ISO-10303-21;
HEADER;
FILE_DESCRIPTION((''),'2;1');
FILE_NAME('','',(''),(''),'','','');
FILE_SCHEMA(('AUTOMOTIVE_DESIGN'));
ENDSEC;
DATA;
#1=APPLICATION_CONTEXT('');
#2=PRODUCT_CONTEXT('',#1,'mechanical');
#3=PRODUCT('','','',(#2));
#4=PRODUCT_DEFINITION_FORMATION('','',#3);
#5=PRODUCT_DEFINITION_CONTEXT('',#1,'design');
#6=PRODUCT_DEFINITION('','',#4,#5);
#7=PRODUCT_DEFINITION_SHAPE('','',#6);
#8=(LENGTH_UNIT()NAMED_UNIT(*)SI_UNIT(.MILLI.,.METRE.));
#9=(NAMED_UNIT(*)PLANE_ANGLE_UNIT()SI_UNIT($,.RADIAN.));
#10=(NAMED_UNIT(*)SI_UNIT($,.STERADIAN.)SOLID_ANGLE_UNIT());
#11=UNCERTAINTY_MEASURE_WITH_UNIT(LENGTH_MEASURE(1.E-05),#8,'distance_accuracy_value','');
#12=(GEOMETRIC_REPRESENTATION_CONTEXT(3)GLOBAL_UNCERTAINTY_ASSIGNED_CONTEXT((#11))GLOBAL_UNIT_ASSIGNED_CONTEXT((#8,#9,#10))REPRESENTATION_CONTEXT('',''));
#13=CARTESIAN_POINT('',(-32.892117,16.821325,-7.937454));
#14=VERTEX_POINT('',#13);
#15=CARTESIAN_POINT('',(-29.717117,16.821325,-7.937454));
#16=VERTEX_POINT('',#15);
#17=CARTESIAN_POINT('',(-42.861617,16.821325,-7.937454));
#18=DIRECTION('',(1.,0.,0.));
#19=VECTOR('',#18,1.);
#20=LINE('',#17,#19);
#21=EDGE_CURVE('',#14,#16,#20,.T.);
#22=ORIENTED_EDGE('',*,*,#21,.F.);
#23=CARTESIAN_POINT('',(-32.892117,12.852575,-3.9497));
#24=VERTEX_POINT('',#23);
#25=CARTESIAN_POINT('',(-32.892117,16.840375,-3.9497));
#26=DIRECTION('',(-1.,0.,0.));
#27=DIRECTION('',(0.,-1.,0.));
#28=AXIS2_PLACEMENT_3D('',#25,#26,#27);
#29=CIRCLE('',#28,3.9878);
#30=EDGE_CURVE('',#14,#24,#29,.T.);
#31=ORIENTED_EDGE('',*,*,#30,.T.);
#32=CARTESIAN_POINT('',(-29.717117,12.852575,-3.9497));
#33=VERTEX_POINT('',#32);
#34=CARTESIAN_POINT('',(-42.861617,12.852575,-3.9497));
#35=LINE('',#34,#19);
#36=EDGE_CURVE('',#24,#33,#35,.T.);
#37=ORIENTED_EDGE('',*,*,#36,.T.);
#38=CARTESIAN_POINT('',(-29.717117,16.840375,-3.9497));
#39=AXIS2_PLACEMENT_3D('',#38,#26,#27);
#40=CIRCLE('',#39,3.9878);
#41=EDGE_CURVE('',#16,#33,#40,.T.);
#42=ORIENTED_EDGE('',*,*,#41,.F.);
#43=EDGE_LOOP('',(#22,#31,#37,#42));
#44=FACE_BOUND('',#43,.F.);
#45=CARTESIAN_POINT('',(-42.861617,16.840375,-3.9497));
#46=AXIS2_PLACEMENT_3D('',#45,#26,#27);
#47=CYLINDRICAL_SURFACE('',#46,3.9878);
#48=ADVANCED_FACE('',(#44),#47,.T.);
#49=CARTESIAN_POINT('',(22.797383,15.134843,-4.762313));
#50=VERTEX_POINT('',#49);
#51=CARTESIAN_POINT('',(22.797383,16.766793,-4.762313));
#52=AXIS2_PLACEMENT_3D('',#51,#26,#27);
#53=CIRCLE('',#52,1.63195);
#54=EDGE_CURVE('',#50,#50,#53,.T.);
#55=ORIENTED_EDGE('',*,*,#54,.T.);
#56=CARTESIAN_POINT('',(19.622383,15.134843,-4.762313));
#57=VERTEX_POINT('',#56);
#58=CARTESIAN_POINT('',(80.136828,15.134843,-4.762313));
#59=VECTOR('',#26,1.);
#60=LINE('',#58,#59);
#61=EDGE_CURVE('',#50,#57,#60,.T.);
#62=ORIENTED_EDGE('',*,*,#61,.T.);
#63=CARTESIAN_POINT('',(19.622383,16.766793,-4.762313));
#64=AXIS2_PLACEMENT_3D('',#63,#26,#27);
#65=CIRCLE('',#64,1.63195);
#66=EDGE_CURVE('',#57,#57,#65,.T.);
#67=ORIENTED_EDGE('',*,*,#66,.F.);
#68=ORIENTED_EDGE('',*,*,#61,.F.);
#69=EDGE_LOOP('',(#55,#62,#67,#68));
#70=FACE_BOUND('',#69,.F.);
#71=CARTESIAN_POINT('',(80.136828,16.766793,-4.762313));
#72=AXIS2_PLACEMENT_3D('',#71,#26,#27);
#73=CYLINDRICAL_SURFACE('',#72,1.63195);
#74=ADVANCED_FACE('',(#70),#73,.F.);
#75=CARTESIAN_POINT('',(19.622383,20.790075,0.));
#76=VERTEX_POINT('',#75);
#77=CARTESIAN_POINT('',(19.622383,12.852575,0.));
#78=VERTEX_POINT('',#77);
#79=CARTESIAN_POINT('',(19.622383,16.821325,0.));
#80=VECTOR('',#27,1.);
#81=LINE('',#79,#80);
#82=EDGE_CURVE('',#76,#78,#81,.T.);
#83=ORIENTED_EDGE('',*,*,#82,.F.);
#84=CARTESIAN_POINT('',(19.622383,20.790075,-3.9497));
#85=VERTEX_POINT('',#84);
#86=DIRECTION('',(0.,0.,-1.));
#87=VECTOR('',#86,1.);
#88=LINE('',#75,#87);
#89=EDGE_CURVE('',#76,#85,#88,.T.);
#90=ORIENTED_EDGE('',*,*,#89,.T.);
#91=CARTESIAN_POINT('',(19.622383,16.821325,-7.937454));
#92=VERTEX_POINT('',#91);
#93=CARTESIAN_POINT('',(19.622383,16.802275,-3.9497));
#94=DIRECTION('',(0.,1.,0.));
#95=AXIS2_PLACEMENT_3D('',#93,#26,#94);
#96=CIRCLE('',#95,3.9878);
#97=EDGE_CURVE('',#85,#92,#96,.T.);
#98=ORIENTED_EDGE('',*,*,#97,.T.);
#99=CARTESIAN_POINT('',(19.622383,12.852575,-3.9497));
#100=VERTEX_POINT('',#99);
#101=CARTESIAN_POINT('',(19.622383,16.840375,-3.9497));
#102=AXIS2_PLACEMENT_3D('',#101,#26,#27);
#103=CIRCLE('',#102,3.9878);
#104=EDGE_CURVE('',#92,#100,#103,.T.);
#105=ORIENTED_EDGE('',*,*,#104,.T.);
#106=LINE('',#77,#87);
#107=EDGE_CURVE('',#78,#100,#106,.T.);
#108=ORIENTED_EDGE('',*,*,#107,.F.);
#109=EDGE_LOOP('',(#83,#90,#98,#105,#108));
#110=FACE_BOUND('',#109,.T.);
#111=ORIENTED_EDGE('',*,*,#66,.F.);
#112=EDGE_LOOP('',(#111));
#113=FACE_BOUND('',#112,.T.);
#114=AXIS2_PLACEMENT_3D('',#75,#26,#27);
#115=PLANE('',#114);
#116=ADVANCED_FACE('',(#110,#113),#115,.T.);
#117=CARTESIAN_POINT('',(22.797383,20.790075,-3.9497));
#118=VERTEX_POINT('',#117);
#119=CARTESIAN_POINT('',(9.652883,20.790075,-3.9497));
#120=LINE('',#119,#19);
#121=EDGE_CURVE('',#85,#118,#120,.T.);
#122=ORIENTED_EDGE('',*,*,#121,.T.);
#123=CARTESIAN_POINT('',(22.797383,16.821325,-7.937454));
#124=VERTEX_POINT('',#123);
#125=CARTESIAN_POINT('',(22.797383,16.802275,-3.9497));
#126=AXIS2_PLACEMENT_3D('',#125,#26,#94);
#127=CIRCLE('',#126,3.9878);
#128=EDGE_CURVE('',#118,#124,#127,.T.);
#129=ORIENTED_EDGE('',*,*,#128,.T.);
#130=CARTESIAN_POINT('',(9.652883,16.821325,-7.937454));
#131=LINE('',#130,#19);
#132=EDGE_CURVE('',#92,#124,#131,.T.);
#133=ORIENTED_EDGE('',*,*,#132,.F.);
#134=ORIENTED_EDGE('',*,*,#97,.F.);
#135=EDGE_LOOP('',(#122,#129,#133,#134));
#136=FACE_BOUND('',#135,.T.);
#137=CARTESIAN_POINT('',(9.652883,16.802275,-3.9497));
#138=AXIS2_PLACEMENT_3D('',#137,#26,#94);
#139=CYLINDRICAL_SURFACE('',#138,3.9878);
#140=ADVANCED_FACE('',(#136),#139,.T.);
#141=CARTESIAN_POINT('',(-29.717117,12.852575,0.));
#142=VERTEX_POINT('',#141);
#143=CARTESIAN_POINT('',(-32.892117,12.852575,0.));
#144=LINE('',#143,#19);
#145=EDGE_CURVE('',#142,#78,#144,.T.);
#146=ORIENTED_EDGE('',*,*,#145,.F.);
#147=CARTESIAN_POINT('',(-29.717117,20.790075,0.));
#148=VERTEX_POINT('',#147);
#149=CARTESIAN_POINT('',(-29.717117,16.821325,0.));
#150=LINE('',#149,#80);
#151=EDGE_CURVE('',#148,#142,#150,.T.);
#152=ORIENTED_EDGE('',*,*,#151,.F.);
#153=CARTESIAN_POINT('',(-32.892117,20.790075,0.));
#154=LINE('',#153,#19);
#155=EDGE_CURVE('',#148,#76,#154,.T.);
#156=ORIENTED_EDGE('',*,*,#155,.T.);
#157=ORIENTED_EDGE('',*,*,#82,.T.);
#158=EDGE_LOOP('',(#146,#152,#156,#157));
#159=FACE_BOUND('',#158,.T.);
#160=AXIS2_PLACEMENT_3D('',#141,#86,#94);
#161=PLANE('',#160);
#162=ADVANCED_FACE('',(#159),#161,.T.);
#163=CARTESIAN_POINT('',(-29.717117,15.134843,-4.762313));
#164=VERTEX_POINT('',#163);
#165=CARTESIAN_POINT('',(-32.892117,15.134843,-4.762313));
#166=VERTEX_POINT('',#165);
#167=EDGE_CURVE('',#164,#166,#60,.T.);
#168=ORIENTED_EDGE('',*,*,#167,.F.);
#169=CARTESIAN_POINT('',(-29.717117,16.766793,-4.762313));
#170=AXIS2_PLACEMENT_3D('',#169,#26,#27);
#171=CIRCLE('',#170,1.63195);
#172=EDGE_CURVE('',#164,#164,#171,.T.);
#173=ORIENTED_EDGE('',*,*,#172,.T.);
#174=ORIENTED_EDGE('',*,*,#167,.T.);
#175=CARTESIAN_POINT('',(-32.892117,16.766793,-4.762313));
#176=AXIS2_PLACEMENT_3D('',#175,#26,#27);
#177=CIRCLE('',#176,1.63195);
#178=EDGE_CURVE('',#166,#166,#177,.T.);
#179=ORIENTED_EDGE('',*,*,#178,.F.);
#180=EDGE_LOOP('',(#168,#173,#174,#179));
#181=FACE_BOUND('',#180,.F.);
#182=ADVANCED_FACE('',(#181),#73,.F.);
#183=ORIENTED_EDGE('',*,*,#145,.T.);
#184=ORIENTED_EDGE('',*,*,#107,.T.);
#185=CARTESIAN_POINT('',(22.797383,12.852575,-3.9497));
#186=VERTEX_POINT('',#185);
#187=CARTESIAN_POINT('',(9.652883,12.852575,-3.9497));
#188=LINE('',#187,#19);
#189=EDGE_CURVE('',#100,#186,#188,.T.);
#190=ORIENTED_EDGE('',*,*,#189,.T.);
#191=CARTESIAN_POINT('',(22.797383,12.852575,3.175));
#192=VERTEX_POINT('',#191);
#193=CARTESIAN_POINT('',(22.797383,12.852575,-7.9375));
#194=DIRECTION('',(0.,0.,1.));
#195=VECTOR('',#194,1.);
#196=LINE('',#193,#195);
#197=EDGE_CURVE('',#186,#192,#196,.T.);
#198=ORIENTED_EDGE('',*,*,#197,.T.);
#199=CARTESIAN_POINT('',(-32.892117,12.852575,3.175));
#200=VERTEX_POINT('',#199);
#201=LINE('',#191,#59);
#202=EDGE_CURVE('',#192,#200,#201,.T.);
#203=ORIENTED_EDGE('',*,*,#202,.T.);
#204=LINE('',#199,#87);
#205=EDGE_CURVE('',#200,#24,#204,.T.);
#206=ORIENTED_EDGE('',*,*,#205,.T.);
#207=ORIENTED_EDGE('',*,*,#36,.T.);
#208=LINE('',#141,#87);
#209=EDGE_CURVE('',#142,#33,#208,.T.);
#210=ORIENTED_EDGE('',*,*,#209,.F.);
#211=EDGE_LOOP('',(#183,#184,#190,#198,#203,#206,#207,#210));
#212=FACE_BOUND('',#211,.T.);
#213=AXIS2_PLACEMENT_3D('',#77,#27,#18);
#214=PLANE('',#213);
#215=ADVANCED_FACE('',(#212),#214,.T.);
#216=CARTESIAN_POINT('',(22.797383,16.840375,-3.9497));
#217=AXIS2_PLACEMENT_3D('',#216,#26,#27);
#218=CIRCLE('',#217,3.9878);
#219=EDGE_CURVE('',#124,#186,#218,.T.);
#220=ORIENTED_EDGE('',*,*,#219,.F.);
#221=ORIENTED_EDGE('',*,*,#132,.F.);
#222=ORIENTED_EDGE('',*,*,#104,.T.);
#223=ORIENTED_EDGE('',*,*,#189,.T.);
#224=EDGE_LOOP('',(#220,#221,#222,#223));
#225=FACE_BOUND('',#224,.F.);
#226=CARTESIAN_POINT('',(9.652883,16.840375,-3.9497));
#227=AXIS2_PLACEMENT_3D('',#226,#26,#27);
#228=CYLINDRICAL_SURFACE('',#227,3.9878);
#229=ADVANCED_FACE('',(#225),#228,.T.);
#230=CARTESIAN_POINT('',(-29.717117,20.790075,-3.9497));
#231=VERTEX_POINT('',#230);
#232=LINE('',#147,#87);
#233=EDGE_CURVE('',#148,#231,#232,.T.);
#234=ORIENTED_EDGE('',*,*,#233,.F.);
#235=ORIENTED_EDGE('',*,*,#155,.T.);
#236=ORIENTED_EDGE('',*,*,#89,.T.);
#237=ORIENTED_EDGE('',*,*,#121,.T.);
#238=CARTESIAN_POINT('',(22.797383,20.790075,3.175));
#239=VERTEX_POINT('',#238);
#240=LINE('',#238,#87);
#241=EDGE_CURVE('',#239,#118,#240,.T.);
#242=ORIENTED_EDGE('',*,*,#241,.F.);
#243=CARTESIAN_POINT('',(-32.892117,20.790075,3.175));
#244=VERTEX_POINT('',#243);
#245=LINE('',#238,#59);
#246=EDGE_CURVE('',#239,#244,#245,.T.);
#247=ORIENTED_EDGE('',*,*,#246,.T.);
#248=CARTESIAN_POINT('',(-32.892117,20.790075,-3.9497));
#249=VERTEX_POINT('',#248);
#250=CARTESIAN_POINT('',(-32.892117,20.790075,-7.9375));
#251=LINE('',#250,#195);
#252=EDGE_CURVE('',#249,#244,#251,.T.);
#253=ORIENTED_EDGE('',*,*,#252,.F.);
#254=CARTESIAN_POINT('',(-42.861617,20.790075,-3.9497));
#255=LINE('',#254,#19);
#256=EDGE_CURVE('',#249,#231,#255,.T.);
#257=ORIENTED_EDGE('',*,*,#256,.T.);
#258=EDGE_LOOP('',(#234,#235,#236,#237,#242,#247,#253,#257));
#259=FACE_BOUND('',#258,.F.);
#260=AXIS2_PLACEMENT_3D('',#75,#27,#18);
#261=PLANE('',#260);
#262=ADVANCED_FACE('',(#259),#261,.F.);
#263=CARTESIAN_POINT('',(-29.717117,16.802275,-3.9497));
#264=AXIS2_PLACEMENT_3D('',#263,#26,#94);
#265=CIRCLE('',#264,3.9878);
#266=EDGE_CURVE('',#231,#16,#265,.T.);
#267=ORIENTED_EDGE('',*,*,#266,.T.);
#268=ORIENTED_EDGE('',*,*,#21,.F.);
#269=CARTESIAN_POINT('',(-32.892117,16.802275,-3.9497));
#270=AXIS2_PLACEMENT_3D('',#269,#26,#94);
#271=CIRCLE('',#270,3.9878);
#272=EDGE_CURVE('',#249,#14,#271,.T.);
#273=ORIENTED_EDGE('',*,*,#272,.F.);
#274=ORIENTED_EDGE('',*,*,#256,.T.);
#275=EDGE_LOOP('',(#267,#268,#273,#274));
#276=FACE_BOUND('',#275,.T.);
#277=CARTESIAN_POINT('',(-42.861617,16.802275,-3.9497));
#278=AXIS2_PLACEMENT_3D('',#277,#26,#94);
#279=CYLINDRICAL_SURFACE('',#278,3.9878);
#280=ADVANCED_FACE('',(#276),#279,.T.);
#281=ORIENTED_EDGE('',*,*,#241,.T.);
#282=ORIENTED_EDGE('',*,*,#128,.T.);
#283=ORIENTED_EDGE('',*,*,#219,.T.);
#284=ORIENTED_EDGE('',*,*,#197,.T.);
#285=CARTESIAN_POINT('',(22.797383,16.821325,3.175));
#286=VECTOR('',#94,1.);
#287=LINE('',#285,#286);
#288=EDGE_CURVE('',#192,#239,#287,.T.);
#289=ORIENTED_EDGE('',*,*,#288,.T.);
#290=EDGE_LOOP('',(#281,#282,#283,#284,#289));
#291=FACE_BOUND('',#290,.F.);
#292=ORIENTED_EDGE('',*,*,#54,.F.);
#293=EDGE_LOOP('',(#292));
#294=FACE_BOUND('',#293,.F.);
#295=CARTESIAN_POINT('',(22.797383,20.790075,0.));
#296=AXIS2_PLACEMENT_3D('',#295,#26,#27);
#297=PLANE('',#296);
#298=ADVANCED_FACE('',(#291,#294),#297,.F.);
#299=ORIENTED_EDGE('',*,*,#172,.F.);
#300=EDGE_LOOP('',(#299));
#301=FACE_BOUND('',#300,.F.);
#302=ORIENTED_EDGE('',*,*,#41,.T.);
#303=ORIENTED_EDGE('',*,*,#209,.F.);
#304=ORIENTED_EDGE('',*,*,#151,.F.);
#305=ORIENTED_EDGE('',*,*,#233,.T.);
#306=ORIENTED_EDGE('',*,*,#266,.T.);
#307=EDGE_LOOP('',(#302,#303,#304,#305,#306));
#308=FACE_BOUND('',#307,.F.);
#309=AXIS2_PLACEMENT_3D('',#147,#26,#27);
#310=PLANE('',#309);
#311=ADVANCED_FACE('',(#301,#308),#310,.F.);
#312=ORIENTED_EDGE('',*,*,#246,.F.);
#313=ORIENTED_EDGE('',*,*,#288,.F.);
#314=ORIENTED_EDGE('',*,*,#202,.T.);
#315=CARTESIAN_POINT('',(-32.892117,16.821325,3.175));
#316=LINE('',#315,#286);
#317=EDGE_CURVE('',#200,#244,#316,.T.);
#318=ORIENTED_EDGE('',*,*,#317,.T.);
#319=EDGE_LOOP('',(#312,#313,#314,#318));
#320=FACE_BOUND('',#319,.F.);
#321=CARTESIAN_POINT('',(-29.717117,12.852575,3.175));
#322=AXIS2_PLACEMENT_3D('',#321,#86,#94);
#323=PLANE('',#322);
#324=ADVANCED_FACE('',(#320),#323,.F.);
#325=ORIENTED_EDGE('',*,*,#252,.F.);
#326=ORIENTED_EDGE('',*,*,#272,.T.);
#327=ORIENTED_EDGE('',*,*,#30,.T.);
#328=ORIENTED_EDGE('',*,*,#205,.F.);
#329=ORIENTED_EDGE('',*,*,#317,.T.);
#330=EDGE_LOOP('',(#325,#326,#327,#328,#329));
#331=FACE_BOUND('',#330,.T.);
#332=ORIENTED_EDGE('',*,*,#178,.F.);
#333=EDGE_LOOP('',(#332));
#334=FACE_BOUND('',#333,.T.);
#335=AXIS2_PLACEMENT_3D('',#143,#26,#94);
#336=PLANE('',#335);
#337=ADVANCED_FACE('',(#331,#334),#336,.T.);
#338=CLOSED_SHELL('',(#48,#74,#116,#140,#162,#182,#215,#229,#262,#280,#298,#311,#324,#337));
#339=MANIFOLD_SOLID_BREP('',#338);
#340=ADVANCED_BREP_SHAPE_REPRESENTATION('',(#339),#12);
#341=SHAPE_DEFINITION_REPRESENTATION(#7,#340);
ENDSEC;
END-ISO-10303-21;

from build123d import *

# Parameters (mm, degrees)
F0_W        = 49.2125
F0_H        = 7.9375
F1_DEPTH    = 3.175
F2_DEPTH    = 3.302
F3_DEPTH    = 3.175
F4_W        = 3.175
F4_H        = 7.9375
F5_DEPTH    = 7.9375
F7_D        = 3.2639
F8_T1_DEPTH = 23.114
F8_T3_DEPTH = 23.114


# Not quite as in the source:
# - a fillet or chamfer that OpenCascade refuses, or shapes differently, is made with other operations: its cross-section is extruded or revolved along the edge and cut away or added


with BuildPart() as f1:
    # F0 (on Top) → F1 (new body)
    with BuildSketch(Plane.XY):
        with Locations((-5.1108673215, 16.8213252627)):
            Rectangle(F0_W, F0_H)
    extrude(amount=F1_DEPTH)

    # F2 (add): a face of the model
    f2_faces = [f1.faces().sort_by_distance(p)[0] for p in [
        (19.4953826785, 16.8213252627, 1.5875),
    ]]
    extrude(f2_faces, amount=F2_DEPTH)

    # F3 (add): a face of the model
    f3_faces = [f1.faces().sort_by_distance(p)[0] for p in [
        (-29.7171173215, 16.8213252627, 1.5875),
    ]]
    extrude(f3_faces, amount=F3_DEPTH)

    # F4 (on face) → F5 (join)
    with BuildSketch(Plane(origin=(0, 0, 0), x_dir=(1, 0, 0), z_dir=(0, 0, -1))):
        with Locations((21.2098826785, -16.8213252627)):
            Rectangle(F4_W, F4_H)
        with Locations((-31.3046173215, -16.8213252627)):
            Rectangle(F4_W, F4_H)
    extrude(amount=F5_DEPTH)

    # F7 (through all)
    with Locations(Plane.YZ.offset(22.7973826785)):
        with Locations((16.7667926535, -4.7623126715)):
            Hole(F7_D / 2)

    # F8: fillet of radius 3.9878 on 4 edges, made by hand

    # F8_s2 → F8_t1 (cut)
    with BuildSketch(Plane.YZ.offset(9.6528826785)):
        with BuildLine():
            ThreePointArc((12.8525752627, -3.9497), (14.0205748406, -6.769500422), (16.8403752627, -7.9375))
            Line((16.8403752627, -7.9375), (12.8525752627, -7.9375))
            Line((12.8525752627, -7.9375), (12.8525752627, -3.9497))
        make_face()
        with BuildLine():
            ThreePointArc((20.7900752627, -3.9497), (19.6220756847, -6.769500422), (16.8022752627, -7.9375))
            Line((16.8022752627, -7.9375), (20.7900752627, -7.9375))
            Line((20.7900752627, -7.9375), (20.7900752627, -3.9497))
        make_face()
    extrude(amount=F8_T1_DEPTH, mode=Mode.SUBTRACT)

    # F8_s4 → F8_t3 (cut)
    with BuildSketch(Plane.YZ.offset(-42.8616173215)):
        with BuildLine():
            ThreePointArc((12.8525752627, -3.9497), (14.0205748406, -6.769500422), (16.8403752627, -7.9375))
            Line((16.8403752627, -7.9375), (12.8525752627, -7.9375))
            Line((12.8525752627, -7.9375), (12.8525752627, -3.9497))
        make_face()
        with BuildLine():
            ThreePointArc((20.7900752627, -3.9497), (19.6220756847, -6.769500422), (16.8022752627, -7.9375))
            Line((16.8022752627, -7.9375), (20.7900752627, -7.9375))
            Line((20.7900752627, -7.9375), (20.7900752627, -3.9497))
        make_face()
    extrude(amount=F8_T3_DEPTH, mode=Mode.SUBTRACT)


solid = f1.part
